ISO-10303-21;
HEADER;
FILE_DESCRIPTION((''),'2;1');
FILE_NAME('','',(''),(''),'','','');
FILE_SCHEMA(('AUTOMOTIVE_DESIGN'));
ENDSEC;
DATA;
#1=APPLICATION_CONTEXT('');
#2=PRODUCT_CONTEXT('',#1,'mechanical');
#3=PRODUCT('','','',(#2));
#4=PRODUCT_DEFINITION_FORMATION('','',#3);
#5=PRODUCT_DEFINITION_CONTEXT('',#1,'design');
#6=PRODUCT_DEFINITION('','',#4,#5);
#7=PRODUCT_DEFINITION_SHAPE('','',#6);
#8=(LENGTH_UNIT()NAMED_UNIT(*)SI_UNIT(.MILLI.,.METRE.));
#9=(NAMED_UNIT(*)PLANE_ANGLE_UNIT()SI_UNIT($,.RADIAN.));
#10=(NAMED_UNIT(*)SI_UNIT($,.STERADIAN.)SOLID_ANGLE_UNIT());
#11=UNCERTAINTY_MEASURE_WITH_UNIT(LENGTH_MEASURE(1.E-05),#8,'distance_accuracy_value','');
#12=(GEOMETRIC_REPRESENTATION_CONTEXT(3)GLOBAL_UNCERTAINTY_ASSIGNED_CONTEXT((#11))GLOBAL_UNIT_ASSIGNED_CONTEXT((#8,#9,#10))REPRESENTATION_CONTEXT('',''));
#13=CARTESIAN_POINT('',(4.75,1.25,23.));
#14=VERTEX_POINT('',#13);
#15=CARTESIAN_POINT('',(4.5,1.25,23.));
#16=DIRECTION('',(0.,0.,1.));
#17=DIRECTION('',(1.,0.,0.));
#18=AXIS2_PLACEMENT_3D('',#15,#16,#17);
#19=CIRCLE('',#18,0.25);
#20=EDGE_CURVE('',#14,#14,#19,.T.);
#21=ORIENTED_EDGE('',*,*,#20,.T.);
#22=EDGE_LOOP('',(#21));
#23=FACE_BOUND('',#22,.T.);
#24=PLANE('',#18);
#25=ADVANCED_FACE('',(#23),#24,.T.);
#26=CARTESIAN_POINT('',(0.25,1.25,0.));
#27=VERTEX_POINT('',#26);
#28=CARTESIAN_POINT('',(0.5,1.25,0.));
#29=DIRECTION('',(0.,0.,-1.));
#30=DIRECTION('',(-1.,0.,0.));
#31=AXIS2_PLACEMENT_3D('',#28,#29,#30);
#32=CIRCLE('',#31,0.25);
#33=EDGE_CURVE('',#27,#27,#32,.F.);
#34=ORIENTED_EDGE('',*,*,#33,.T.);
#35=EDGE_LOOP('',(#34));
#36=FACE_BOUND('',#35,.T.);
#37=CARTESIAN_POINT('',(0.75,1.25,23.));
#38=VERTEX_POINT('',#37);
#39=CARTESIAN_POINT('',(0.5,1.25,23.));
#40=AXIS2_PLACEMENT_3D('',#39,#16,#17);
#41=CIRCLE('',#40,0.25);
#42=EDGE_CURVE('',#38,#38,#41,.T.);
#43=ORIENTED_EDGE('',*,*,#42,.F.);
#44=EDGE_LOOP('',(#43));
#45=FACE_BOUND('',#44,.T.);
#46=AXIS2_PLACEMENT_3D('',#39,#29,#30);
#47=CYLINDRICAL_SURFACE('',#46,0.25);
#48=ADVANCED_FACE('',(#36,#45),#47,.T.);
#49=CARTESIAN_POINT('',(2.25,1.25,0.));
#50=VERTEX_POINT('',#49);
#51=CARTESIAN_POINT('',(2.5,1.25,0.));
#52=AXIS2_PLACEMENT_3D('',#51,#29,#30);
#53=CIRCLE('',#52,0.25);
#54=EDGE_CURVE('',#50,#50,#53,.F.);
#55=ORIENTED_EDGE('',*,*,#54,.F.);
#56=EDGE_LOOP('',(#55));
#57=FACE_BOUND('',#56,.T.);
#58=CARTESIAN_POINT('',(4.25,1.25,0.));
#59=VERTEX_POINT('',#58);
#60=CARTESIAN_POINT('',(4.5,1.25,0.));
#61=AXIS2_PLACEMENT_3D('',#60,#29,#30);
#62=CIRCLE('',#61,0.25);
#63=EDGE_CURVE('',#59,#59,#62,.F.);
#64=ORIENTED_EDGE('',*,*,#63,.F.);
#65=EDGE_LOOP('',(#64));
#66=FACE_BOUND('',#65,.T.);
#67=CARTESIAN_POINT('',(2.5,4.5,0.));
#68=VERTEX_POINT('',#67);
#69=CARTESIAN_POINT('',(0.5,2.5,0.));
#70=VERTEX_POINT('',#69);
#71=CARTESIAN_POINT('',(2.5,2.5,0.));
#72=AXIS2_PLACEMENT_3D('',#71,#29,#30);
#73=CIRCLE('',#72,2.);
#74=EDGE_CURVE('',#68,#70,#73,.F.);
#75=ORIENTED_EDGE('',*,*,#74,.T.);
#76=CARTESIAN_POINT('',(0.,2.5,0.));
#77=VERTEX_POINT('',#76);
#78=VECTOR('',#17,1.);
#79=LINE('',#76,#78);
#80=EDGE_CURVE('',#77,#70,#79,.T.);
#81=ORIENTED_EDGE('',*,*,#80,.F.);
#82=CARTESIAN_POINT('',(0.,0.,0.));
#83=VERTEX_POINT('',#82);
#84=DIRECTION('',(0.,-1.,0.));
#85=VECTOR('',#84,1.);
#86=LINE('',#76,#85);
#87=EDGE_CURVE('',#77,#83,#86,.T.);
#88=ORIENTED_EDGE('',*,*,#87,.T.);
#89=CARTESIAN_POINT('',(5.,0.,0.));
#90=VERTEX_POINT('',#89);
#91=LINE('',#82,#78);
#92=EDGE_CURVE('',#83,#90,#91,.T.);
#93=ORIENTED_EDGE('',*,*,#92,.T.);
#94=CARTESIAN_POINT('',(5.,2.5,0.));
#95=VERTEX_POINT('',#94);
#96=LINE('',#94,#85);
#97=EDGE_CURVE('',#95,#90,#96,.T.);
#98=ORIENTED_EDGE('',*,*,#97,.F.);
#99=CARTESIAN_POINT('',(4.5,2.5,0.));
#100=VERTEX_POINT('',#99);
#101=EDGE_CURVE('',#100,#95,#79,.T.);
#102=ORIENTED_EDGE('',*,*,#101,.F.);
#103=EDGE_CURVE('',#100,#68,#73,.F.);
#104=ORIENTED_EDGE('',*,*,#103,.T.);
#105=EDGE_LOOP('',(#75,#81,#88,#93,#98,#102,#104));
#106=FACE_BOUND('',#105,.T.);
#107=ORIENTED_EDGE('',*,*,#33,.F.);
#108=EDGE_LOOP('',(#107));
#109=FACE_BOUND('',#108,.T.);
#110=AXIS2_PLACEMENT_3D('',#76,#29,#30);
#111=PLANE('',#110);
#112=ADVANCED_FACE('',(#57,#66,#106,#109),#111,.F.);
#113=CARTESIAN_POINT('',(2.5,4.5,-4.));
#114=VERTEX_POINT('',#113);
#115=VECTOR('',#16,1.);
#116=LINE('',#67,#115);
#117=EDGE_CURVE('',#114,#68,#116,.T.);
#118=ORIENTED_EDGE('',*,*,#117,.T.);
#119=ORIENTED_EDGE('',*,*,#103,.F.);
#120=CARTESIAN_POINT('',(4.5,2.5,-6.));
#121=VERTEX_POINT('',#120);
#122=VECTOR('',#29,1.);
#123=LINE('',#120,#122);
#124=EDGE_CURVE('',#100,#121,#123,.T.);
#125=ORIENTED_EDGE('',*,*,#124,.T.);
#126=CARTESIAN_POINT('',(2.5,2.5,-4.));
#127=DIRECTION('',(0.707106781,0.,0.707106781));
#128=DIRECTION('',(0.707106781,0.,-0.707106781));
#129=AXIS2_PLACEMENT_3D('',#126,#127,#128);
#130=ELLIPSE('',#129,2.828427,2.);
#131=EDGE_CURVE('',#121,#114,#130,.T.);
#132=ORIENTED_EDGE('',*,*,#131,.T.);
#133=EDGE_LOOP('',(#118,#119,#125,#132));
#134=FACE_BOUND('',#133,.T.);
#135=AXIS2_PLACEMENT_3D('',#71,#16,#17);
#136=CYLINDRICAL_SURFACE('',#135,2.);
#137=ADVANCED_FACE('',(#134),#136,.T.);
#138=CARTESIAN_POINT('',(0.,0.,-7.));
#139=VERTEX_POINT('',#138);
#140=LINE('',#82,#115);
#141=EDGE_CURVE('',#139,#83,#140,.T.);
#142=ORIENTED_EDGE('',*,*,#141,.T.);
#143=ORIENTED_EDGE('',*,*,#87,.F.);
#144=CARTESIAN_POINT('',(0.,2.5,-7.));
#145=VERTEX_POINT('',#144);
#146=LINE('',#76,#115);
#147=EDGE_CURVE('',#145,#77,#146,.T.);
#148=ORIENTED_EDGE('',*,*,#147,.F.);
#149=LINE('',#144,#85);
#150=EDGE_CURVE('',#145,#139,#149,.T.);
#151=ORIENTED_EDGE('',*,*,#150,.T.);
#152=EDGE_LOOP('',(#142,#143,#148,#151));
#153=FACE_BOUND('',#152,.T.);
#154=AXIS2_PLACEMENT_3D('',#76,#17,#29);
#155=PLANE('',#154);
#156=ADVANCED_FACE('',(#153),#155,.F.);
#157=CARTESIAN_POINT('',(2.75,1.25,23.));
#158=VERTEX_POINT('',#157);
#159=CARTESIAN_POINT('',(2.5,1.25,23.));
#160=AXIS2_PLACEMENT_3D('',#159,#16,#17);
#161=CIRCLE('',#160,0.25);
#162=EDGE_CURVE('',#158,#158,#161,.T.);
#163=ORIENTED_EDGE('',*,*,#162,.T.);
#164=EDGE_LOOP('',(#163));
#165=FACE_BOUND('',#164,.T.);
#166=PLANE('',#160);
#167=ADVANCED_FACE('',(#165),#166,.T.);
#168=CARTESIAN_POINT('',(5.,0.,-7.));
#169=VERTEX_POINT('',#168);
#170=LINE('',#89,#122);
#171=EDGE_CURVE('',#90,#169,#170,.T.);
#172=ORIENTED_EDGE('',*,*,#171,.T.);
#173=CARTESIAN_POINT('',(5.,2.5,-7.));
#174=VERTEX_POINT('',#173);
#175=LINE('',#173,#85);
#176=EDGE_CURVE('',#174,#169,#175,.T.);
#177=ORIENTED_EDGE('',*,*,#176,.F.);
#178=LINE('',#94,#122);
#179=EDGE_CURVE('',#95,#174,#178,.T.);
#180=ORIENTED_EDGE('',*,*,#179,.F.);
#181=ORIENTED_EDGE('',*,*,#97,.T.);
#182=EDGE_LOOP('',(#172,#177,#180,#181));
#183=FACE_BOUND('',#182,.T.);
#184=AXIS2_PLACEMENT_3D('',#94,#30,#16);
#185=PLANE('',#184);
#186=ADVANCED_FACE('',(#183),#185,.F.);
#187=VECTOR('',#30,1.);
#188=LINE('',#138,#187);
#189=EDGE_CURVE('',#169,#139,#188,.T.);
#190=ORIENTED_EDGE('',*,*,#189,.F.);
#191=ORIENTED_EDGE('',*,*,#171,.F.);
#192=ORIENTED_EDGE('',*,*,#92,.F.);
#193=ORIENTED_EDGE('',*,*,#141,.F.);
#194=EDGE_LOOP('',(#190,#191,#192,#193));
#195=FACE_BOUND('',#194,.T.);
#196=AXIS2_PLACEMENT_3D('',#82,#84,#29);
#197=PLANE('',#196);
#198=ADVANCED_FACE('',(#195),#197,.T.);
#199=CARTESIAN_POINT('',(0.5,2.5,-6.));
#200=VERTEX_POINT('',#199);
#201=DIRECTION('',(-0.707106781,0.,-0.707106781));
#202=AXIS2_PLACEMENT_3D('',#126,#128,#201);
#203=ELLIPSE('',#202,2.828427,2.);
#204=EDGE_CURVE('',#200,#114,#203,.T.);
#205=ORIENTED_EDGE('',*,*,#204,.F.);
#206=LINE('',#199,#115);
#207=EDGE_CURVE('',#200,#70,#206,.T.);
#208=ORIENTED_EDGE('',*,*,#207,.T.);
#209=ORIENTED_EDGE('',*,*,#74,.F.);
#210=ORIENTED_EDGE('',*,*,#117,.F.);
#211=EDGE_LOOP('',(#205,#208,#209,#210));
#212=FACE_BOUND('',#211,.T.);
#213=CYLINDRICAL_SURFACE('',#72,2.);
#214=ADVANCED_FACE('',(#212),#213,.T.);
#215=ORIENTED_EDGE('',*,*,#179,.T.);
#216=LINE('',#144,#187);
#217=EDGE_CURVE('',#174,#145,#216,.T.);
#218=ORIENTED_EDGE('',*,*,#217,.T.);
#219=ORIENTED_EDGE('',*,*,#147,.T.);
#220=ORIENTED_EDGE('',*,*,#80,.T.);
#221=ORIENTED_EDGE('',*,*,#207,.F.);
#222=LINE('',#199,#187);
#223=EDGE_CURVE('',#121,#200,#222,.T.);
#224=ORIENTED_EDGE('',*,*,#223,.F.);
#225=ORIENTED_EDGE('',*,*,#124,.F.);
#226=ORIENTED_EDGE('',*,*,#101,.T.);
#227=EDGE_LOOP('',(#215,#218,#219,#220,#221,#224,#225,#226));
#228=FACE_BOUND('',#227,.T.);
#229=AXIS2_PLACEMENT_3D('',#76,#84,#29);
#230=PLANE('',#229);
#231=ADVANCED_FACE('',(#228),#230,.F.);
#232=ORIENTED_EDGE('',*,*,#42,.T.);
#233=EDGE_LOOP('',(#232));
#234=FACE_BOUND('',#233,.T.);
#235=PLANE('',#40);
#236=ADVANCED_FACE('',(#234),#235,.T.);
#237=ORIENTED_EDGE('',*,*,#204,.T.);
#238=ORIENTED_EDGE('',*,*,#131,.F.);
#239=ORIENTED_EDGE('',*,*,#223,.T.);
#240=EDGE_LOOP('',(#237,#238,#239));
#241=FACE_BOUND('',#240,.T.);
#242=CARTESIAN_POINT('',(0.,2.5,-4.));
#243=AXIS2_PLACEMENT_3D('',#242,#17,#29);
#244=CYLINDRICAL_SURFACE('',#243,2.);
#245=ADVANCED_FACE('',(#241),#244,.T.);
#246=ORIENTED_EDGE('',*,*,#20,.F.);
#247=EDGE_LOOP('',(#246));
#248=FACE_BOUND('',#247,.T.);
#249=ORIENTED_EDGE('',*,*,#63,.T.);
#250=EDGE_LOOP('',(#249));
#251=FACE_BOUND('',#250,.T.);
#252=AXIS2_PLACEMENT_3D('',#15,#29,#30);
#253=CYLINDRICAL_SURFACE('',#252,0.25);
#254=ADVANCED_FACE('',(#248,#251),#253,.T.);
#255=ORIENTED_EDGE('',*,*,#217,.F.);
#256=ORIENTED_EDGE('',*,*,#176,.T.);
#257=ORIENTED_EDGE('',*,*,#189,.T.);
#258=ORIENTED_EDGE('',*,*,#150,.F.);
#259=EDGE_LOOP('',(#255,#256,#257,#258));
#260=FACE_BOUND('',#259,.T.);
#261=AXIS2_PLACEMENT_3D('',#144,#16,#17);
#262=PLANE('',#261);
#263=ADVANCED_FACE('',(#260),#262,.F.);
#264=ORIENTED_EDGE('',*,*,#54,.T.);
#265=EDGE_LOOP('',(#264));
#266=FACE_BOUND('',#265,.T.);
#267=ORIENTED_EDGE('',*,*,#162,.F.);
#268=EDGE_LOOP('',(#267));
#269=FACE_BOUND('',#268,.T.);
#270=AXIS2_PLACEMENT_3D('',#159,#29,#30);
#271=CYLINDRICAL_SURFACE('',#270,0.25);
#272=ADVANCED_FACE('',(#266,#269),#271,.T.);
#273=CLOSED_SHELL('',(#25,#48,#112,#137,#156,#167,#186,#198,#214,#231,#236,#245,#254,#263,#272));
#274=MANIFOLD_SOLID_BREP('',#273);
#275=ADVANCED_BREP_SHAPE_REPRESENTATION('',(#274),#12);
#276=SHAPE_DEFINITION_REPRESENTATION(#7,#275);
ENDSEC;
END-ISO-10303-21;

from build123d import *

# Parameters (mm, degrees)
ESQUISSE1_W        = 5
ESQUISSE1_H        = 7
BOSS_EXTRU_1_DEPTH = 2.5
ESQUISSE2_R        = 0.25
BOSS_EXTRU_2_DEPTH = 23
ESQUISSE3_W        = 4
ESQUISSE3_H        = 6
BOSS_EXTRU_3_DEPTH = 2
CONG_1_R           = 2


with BuildPart() as part:
    # Esquisse1 → Boss.-Extru.1 (new body)
    with BuildSketch(Plane(origin=(0, 0, 0), x_dir=(1, 0, 0), z_dir=(0, 1, 0))):
        with Locations((2.5, 3.5)):
            Rectangle(ESQUISSE1_W, ESQUISSE1_H)
    extrude(amount=BOSS_EXTRU_1_DEPTH)

    # Esquisse2 → Boss.-Extru.2 (add)
    with BuildSketch(Plane.XY):
        with Locations(Location((0.5, 1.25, 0), (0, 0, 180))):
            Circle(ESQUISSE2_R)
        with Locations(Location((2.5, 1.25, 0), (0, 0, 180))):
            Circle(ESQUISSE2_R)
        with Locations(Location((4.5, 1.25, 0), (0, 0, 180))):
            Circle(ESQUISSE2_R)
    extrude(amount=BOSS_EXTRU_2_DEPTH)

    # Esquisse3 → Boss.-Extru.3 (add)
    with BuildSketch(Plane(origin=(0, 2.5, 0), x_dir=(1, 0, 0), z_dir=(0, 1, 0))):
        with Locations((2.5, 3)):
            Rectangle(ESQUISSE3_W, ESQUISSE3_H)
    extrude(amount=BOSS_EXTRU_3_DEPTH)

    # Congé1
    cong_1_edges = [part.edges().sort_by_distance(p)[0] for p in [
        (4.5, 4.5, -3),
        (2.5, 4.5, -6),
        (0.5, 4.5, -3),
    ]]
    fillet(cong_1_edges, radius=CONG_1_R - 0.0001)  # a hair under: the kernel refuses the full size


solid = part.part
